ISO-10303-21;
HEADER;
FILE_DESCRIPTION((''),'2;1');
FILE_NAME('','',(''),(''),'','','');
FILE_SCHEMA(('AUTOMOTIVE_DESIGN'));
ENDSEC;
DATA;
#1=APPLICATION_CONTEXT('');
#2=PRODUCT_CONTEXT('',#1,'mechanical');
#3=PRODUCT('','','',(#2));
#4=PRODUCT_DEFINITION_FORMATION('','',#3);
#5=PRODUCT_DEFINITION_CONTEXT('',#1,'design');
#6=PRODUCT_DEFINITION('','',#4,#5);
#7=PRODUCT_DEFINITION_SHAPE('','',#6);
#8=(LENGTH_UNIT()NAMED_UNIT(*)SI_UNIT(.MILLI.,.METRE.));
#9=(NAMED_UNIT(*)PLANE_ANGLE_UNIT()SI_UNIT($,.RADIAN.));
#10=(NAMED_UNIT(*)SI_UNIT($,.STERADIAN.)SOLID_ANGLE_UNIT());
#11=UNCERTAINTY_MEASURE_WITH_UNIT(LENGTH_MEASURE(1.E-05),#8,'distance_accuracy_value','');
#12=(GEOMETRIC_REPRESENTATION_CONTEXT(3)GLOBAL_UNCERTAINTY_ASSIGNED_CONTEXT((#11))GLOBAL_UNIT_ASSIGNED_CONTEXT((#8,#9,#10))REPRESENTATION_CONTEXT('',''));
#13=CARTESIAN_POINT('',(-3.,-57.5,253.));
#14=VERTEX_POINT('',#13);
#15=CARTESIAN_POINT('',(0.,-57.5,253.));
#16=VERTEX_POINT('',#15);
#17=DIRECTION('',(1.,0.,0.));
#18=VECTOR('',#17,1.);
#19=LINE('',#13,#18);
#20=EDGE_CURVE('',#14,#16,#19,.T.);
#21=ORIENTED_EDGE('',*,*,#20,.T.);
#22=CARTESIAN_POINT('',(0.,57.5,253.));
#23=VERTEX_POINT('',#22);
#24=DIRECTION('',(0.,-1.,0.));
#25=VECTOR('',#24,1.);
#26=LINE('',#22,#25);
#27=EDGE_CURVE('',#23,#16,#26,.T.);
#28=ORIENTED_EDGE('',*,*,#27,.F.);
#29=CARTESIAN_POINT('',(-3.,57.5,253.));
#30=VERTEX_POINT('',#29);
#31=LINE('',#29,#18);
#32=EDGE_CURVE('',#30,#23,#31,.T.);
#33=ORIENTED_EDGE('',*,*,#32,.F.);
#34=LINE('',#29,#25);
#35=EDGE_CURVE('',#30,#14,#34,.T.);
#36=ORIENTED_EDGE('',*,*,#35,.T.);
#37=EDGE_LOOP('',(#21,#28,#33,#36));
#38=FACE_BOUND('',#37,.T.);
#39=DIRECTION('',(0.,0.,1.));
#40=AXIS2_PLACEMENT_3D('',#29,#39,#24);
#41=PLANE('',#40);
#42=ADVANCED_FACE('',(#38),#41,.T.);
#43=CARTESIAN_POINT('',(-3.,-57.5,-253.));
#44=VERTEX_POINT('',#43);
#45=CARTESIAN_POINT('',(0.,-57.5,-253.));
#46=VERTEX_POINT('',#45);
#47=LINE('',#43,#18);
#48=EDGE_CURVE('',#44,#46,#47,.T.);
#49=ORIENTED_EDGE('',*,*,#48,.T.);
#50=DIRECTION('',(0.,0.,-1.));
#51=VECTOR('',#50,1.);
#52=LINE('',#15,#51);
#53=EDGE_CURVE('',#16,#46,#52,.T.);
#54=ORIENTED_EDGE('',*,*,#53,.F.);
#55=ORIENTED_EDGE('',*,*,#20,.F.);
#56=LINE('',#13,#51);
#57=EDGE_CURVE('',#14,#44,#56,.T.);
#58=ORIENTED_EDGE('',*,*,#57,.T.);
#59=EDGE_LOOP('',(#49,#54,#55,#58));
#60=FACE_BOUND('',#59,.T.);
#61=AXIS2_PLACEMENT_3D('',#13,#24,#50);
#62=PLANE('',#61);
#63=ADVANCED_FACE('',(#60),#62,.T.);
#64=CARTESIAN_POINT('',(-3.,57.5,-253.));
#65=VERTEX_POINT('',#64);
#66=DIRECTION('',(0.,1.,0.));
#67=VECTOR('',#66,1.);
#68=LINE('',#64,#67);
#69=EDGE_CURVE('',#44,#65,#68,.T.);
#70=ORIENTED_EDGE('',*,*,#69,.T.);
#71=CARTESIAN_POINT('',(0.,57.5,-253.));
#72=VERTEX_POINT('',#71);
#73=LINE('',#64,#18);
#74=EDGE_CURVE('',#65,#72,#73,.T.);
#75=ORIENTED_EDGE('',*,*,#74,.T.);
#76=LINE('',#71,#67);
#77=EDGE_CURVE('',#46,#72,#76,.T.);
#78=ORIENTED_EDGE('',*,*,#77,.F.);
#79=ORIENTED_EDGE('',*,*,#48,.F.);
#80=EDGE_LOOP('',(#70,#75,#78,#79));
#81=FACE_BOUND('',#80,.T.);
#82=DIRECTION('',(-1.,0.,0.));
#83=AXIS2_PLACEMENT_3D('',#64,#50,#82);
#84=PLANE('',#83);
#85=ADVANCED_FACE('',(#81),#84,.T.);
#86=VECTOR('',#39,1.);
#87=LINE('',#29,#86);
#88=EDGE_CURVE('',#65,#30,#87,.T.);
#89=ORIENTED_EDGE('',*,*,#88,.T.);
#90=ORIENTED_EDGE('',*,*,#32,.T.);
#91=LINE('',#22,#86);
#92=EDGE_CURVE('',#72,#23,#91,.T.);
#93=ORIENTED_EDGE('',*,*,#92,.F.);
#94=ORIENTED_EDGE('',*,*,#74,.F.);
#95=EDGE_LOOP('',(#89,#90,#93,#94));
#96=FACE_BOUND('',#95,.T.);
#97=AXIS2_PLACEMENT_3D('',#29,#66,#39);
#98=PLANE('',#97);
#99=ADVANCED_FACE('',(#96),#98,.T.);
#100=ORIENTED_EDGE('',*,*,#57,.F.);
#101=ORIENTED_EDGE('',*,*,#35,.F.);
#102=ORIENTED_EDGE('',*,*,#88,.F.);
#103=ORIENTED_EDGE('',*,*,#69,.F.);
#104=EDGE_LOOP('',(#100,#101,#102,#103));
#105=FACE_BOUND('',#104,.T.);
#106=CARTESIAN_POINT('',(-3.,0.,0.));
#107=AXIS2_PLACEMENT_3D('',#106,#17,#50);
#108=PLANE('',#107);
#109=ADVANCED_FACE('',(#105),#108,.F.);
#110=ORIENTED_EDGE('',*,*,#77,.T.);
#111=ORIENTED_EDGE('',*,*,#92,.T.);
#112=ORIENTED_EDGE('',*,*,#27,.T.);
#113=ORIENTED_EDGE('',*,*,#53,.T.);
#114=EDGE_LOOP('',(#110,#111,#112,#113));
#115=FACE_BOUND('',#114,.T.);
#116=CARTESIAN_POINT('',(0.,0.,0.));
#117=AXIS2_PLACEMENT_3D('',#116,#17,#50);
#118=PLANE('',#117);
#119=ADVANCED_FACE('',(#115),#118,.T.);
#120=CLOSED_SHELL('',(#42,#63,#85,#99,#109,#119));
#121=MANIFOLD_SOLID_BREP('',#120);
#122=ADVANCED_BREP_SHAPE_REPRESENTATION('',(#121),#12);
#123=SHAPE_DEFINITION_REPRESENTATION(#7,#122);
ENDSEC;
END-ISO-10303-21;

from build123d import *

# Parameters (mm, degrees)
SKETCH_1_W             = 506
SKETCH_1_H             = 115
SM_BASE_FLANGE_1_DEPTH = 3


# Sheet-metal steps are written as plain solids
with BuildPart() as part:
    # Sketch 1 → Базовая кромка1 (new body)
    with BuildSketch(Plane(origin=(0, 0, 0), x_dir=(0, 0, -1), z_dir=(1, 0, 0))):
        Rectangle(SKETCH_1_W, SKETCH_1_H)
    extrude(amount=-SM_BASE_FLANGE_1_DEPTH)


solid = part.part
